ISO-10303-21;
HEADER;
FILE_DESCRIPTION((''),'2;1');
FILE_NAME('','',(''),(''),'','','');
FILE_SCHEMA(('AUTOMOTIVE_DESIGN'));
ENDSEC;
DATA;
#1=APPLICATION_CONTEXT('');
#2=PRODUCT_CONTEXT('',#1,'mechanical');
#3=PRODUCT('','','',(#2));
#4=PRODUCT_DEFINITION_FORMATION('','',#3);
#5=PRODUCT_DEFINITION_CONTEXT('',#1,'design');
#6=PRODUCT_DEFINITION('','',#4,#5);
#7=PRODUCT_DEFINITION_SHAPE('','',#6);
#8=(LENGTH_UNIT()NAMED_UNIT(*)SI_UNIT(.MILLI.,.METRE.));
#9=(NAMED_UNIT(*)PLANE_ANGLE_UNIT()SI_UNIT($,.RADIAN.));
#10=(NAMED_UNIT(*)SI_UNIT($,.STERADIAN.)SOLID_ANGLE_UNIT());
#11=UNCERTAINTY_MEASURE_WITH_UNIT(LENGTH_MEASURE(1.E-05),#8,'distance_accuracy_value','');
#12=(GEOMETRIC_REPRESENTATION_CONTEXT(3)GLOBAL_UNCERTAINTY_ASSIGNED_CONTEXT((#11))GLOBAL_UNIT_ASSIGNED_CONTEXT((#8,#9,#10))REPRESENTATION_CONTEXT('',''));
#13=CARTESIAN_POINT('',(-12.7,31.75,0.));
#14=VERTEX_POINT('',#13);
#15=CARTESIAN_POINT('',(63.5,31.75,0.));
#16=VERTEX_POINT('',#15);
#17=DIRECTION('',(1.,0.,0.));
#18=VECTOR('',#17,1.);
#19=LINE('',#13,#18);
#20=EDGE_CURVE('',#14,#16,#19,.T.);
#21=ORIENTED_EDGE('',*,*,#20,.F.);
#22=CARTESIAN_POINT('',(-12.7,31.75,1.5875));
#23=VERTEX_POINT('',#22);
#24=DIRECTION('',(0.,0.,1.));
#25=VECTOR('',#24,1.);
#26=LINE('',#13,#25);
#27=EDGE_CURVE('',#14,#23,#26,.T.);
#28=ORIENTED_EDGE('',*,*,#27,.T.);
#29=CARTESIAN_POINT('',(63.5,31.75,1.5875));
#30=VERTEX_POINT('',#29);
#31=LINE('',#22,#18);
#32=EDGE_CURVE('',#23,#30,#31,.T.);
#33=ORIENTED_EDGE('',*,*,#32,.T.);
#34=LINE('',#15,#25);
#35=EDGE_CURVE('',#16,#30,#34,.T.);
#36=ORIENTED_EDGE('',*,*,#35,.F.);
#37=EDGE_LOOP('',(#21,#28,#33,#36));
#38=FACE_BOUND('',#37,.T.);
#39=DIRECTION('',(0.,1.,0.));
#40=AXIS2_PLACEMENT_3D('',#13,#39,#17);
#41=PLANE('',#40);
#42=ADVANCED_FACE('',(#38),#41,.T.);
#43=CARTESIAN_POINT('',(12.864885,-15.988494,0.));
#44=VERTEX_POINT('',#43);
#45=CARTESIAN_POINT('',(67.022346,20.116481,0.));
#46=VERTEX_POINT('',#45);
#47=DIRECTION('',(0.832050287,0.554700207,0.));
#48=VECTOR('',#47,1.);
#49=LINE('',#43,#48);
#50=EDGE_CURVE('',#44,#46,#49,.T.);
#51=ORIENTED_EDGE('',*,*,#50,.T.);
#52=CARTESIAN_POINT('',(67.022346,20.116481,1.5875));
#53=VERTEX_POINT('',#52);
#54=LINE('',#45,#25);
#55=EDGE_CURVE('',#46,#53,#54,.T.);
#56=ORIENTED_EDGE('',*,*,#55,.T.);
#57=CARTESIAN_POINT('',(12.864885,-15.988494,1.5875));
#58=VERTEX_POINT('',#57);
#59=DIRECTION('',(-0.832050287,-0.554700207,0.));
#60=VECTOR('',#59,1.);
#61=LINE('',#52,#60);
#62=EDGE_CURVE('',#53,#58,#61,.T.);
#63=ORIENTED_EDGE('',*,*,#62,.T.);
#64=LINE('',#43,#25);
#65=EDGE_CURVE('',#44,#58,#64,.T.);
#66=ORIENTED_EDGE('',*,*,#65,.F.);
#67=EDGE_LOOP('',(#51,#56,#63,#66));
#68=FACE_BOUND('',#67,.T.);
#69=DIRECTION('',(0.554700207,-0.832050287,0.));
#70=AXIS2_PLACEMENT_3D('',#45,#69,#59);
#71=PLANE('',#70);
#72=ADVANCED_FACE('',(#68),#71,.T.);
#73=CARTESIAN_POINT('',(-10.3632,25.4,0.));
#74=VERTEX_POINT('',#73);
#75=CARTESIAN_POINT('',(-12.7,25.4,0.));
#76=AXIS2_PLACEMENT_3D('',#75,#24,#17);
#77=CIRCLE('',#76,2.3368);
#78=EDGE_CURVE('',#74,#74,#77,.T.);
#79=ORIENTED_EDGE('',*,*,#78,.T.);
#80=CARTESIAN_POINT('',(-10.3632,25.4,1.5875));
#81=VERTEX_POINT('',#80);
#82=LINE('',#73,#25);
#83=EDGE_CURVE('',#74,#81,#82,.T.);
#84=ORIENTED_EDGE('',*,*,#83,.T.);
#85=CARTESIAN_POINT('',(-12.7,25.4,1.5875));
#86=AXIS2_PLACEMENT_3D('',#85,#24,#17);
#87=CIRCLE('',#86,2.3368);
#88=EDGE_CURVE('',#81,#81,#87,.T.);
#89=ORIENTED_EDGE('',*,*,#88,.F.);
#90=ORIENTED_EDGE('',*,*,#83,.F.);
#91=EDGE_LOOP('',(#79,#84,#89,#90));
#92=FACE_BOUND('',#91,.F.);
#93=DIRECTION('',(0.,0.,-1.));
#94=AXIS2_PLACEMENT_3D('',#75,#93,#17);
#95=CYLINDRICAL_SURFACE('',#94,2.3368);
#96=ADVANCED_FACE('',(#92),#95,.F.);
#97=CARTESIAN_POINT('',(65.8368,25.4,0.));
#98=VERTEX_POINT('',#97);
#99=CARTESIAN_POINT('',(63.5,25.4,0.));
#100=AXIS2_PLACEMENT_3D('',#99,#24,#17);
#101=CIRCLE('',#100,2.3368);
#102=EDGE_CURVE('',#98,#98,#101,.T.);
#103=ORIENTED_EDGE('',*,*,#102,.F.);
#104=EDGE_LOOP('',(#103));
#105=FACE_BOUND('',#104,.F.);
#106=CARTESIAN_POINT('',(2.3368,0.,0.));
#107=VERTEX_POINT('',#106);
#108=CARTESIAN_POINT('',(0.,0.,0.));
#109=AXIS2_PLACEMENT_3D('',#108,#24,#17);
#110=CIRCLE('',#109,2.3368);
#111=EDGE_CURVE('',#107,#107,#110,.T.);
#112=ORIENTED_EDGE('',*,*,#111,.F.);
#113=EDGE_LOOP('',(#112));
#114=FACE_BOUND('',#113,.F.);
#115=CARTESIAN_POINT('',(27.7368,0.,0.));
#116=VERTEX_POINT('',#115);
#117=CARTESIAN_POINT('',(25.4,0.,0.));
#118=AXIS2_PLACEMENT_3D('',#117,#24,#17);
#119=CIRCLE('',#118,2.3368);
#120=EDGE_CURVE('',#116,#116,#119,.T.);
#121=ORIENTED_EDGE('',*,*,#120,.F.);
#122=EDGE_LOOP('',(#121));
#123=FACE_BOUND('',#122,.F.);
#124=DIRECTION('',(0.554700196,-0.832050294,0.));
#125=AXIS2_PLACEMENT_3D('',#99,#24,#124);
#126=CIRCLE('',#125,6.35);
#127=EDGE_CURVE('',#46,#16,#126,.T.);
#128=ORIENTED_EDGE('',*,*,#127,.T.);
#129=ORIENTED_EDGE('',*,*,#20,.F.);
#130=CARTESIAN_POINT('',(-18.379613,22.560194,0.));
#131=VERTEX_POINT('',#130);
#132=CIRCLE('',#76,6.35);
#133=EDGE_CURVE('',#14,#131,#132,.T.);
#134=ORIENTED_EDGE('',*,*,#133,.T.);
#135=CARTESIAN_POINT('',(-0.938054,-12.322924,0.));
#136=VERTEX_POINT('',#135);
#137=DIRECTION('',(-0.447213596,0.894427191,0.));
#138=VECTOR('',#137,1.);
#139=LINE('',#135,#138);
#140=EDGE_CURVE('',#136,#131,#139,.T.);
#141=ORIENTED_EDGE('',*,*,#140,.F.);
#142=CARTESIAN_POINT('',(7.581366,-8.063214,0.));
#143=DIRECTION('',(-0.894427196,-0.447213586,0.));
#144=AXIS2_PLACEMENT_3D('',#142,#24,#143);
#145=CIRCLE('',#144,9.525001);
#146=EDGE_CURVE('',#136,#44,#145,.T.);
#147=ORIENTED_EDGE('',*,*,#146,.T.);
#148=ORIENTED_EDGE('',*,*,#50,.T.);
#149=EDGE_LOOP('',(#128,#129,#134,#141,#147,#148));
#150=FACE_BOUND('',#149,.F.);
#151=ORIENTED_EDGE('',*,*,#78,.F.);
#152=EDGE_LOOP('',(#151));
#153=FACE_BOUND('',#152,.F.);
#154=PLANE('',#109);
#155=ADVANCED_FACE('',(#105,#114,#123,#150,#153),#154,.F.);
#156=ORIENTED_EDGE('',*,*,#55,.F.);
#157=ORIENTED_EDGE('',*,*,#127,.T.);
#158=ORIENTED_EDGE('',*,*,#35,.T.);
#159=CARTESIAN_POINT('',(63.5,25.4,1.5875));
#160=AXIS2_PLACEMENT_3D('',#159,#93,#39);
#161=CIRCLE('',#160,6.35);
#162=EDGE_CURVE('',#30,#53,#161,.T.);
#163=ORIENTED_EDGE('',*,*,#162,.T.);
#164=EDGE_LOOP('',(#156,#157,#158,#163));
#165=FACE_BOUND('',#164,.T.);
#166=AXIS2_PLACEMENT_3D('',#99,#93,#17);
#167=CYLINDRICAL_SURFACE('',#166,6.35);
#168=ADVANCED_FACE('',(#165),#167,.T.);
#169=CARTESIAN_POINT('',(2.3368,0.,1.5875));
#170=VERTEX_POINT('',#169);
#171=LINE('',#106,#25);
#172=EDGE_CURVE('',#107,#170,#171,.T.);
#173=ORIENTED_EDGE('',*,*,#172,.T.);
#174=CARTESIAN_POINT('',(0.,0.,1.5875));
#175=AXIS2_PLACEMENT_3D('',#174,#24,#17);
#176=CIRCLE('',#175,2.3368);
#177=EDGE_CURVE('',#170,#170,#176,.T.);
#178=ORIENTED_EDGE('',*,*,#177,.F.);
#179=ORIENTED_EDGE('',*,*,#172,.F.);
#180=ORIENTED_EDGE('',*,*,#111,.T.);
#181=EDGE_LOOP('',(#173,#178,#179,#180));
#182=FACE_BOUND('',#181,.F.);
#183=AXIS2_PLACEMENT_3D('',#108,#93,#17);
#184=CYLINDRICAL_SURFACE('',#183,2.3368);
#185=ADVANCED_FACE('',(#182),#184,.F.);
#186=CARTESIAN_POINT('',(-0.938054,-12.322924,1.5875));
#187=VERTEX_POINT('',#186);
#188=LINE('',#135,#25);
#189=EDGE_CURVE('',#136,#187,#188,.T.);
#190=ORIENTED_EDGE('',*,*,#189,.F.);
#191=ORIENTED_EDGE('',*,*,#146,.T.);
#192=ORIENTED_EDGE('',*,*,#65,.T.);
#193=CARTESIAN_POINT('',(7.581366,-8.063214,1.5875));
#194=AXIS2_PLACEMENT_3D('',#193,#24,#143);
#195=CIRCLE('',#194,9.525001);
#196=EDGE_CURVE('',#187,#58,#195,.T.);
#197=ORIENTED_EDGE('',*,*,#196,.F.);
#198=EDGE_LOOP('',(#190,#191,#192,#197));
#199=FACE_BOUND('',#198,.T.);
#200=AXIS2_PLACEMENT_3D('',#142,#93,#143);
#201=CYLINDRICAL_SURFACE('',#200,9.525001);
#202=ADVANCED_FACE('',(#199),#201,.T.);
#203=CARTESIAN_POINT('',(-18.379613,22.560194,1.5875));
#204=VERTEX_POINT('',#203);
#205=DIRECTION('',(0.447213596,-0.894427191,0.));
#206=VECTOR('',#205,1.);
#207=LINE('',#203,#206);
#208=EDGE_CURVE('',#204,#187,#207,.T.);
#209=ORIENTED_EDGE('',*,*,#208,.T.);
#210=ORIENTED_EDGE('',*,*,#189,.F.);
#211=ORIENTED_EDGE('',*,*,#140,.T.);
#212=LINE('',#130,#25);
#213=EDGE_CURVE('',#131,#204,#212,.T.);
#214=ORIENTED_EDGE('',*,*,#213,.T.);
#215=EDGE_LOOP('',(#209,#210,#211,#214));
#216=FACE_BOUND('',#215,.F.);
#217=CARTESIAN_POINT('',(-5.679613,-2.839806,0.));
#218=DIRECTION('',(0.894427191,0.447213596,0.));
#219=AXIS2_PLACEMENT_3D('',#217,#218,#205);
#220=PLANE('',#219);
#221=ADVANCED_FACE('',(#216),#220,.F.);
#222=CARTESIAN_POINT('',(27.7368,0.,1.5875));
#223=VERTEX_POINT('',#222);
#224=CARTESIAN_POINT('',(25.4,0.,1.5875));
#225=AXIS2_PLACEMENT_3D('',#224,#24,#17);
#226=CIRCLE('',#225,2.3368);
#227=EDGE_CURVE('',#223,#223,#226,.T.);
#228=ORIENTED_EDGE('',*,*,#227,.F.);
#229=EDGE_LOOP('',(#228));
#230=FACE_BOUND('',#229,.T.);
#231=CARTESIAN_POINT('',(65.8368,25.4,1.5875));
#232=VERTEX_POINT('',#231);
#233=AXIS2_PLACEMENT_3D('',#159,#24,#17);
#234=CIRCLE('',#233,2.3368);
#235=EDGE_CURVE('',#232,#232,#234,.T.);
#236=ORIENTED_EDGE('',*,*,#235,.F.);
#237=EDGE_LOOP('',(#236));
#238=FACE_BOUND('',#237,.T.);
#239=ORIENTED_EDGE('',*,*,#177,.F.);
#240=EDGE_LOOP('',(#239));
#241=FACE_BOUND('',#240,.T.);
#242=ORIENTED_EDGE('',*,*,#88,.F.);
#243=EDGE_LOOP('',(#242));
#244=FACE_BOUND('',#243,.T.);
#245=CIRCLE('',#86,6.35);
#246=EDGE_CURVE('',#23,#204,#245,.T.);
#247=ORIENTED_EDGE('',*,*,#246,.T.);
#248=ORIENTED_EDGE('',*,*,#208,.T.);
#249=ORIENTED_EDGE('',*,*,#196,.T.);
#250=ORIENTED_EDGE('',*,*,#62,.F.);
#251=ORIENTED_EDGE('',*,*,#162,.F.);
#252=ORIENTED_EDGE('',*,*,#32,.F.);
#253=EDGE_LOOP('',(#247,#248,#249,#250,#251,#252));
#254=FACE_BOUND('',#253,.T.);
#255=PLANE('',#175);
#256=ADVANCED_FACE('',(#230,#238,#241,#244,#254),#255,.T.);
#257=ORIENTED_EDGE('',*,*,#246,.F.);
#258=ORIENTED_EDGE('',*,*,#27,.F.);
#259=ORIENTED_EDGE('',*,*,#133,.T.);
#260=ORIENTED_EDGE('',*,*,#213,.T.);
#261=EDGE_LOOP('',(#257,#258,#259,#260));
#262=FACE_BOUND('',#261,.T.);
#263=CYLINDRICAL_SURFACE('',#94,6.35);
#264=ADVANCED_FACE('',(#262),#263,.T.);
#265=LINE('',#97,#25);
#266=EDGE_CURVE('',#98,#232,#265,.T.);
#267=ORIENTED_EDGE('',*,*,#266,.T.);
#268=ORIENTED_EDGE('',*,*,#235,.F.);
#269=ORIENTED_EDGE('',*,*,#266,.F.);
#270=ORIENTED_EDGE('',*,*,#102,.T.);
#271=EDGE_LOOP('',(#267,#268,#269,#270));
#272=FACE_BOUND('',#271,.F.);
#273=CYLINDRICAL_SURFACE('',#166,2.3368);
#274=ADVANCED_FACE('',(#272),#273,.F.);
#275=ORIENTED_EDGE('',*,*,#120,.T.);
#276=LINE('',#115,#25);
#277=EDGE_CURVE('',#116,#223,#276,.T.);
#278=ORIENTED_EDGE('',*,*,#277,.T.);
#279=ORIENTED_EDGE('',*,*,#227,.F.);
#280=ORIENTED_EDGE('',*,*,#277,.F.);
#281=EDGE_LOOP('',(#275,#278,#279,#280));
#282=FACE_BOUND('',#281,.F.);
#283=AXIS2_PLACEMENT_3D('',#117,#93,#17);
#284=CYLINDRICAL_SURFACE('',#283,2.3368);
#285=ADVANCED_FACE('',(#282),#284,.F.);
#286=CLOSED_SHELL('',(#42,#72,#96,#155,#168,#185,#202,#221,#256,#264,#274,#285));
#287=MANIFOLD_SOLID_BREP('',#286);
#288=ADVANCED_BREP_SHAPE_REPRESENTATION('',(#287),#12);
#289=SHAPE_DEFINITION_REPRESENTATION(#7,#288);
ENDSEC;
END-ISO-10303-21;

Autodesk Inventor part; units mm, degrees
ref_plane "YZ Plane" through (0, 0, 0) normal (1, 0, 0) x (0, 1, 0)
ref_plane "XZ Plane" through (0, 0, 0) normal (0, 1, 0) x (-1, 0, 0)
ref_plane "XY Plane" through (0, 0, 0) normal (0, 0, 1) x (1, 0, 0)
sketch "Sketch12" plane through (0, 0, 0) normal (0, 0, 1) x (1, 0, 0)
  circle A0 centre (0, 0) radius 2.3368
  circle A1 centre (25.4, 0) radius 2.3368
  line L0 (-10.876623, 25.4) -> (39.923377, 25.4) construction
  circle A2 centre (-12.7, 25.4) radius 2.3368
  circle A3 centre (63.5, 25.4) radius 2.3368
  circle A4 centre (63.5, 25.4) radius 6.35
  circle A5 centre (-12.7, 25.4) radius 6.35
  circle A6 centre (0, 0) radius 6.35
  circle A7 centre (25.4, 0) radius 6.35
  line L1 (-12.7, 31.75) -> (63.5, 31.75)
  line L2 (67.022346, 20.116481) -> (12.864885, -15.988494)
  line L3 (-18.379613, 22.560194) -> (-0.938054, -12.322924)
  arc A8 (-0.938054, -12.322924) -> (12.864885, -15.988494) centre (7.581365, -8.063215) ccw
  dimension "d84" = 4.6736
  dimension "d85" = 4.6736
  dimension "d86" = 25.4
  dimension "d87" = 0
  dimension "d88" = 50.8
  dimension "d89" = 25.4
  dimension "d90" = 4.6736
  dimension "d91" = 12.7
  dimension "d92" = 4.6736
  dimension "d93" = 38.1
  dimension "d94" = 12.7
  dimension "d95" = 12.7
  dimension "d96" = 12.7
  dimension "d97" = 12.7
  dimension "d98" = 9.525
extrude "Plate9" add sketch "Sketch12" along normal blind 1.5875 contours A4 | A6 | A7 | A4 L2 A8 L3 A5 L1 | A5
equation "\"d99\" = Thickness"
equation "\"BendRadius\" = Thickness"
equation "\"BendReliefWidth\" = Thickness"
equation "\"BendReliefDepth\" = 0.5 * Thickness"
equation "\"CornerReliefSize\" = 4 * Thickness"
equation "\"MinimumRemnant\" = 2 * Thickness"
equation "\"TransitionRadius\" = BendRadius"
equation "\"JacobiRadiusSize\" = BendRadius"
equation "\"GapSize\" = Thickness"
equation "\"Thickness\" = 1.5875"
properties part number "sleds"
